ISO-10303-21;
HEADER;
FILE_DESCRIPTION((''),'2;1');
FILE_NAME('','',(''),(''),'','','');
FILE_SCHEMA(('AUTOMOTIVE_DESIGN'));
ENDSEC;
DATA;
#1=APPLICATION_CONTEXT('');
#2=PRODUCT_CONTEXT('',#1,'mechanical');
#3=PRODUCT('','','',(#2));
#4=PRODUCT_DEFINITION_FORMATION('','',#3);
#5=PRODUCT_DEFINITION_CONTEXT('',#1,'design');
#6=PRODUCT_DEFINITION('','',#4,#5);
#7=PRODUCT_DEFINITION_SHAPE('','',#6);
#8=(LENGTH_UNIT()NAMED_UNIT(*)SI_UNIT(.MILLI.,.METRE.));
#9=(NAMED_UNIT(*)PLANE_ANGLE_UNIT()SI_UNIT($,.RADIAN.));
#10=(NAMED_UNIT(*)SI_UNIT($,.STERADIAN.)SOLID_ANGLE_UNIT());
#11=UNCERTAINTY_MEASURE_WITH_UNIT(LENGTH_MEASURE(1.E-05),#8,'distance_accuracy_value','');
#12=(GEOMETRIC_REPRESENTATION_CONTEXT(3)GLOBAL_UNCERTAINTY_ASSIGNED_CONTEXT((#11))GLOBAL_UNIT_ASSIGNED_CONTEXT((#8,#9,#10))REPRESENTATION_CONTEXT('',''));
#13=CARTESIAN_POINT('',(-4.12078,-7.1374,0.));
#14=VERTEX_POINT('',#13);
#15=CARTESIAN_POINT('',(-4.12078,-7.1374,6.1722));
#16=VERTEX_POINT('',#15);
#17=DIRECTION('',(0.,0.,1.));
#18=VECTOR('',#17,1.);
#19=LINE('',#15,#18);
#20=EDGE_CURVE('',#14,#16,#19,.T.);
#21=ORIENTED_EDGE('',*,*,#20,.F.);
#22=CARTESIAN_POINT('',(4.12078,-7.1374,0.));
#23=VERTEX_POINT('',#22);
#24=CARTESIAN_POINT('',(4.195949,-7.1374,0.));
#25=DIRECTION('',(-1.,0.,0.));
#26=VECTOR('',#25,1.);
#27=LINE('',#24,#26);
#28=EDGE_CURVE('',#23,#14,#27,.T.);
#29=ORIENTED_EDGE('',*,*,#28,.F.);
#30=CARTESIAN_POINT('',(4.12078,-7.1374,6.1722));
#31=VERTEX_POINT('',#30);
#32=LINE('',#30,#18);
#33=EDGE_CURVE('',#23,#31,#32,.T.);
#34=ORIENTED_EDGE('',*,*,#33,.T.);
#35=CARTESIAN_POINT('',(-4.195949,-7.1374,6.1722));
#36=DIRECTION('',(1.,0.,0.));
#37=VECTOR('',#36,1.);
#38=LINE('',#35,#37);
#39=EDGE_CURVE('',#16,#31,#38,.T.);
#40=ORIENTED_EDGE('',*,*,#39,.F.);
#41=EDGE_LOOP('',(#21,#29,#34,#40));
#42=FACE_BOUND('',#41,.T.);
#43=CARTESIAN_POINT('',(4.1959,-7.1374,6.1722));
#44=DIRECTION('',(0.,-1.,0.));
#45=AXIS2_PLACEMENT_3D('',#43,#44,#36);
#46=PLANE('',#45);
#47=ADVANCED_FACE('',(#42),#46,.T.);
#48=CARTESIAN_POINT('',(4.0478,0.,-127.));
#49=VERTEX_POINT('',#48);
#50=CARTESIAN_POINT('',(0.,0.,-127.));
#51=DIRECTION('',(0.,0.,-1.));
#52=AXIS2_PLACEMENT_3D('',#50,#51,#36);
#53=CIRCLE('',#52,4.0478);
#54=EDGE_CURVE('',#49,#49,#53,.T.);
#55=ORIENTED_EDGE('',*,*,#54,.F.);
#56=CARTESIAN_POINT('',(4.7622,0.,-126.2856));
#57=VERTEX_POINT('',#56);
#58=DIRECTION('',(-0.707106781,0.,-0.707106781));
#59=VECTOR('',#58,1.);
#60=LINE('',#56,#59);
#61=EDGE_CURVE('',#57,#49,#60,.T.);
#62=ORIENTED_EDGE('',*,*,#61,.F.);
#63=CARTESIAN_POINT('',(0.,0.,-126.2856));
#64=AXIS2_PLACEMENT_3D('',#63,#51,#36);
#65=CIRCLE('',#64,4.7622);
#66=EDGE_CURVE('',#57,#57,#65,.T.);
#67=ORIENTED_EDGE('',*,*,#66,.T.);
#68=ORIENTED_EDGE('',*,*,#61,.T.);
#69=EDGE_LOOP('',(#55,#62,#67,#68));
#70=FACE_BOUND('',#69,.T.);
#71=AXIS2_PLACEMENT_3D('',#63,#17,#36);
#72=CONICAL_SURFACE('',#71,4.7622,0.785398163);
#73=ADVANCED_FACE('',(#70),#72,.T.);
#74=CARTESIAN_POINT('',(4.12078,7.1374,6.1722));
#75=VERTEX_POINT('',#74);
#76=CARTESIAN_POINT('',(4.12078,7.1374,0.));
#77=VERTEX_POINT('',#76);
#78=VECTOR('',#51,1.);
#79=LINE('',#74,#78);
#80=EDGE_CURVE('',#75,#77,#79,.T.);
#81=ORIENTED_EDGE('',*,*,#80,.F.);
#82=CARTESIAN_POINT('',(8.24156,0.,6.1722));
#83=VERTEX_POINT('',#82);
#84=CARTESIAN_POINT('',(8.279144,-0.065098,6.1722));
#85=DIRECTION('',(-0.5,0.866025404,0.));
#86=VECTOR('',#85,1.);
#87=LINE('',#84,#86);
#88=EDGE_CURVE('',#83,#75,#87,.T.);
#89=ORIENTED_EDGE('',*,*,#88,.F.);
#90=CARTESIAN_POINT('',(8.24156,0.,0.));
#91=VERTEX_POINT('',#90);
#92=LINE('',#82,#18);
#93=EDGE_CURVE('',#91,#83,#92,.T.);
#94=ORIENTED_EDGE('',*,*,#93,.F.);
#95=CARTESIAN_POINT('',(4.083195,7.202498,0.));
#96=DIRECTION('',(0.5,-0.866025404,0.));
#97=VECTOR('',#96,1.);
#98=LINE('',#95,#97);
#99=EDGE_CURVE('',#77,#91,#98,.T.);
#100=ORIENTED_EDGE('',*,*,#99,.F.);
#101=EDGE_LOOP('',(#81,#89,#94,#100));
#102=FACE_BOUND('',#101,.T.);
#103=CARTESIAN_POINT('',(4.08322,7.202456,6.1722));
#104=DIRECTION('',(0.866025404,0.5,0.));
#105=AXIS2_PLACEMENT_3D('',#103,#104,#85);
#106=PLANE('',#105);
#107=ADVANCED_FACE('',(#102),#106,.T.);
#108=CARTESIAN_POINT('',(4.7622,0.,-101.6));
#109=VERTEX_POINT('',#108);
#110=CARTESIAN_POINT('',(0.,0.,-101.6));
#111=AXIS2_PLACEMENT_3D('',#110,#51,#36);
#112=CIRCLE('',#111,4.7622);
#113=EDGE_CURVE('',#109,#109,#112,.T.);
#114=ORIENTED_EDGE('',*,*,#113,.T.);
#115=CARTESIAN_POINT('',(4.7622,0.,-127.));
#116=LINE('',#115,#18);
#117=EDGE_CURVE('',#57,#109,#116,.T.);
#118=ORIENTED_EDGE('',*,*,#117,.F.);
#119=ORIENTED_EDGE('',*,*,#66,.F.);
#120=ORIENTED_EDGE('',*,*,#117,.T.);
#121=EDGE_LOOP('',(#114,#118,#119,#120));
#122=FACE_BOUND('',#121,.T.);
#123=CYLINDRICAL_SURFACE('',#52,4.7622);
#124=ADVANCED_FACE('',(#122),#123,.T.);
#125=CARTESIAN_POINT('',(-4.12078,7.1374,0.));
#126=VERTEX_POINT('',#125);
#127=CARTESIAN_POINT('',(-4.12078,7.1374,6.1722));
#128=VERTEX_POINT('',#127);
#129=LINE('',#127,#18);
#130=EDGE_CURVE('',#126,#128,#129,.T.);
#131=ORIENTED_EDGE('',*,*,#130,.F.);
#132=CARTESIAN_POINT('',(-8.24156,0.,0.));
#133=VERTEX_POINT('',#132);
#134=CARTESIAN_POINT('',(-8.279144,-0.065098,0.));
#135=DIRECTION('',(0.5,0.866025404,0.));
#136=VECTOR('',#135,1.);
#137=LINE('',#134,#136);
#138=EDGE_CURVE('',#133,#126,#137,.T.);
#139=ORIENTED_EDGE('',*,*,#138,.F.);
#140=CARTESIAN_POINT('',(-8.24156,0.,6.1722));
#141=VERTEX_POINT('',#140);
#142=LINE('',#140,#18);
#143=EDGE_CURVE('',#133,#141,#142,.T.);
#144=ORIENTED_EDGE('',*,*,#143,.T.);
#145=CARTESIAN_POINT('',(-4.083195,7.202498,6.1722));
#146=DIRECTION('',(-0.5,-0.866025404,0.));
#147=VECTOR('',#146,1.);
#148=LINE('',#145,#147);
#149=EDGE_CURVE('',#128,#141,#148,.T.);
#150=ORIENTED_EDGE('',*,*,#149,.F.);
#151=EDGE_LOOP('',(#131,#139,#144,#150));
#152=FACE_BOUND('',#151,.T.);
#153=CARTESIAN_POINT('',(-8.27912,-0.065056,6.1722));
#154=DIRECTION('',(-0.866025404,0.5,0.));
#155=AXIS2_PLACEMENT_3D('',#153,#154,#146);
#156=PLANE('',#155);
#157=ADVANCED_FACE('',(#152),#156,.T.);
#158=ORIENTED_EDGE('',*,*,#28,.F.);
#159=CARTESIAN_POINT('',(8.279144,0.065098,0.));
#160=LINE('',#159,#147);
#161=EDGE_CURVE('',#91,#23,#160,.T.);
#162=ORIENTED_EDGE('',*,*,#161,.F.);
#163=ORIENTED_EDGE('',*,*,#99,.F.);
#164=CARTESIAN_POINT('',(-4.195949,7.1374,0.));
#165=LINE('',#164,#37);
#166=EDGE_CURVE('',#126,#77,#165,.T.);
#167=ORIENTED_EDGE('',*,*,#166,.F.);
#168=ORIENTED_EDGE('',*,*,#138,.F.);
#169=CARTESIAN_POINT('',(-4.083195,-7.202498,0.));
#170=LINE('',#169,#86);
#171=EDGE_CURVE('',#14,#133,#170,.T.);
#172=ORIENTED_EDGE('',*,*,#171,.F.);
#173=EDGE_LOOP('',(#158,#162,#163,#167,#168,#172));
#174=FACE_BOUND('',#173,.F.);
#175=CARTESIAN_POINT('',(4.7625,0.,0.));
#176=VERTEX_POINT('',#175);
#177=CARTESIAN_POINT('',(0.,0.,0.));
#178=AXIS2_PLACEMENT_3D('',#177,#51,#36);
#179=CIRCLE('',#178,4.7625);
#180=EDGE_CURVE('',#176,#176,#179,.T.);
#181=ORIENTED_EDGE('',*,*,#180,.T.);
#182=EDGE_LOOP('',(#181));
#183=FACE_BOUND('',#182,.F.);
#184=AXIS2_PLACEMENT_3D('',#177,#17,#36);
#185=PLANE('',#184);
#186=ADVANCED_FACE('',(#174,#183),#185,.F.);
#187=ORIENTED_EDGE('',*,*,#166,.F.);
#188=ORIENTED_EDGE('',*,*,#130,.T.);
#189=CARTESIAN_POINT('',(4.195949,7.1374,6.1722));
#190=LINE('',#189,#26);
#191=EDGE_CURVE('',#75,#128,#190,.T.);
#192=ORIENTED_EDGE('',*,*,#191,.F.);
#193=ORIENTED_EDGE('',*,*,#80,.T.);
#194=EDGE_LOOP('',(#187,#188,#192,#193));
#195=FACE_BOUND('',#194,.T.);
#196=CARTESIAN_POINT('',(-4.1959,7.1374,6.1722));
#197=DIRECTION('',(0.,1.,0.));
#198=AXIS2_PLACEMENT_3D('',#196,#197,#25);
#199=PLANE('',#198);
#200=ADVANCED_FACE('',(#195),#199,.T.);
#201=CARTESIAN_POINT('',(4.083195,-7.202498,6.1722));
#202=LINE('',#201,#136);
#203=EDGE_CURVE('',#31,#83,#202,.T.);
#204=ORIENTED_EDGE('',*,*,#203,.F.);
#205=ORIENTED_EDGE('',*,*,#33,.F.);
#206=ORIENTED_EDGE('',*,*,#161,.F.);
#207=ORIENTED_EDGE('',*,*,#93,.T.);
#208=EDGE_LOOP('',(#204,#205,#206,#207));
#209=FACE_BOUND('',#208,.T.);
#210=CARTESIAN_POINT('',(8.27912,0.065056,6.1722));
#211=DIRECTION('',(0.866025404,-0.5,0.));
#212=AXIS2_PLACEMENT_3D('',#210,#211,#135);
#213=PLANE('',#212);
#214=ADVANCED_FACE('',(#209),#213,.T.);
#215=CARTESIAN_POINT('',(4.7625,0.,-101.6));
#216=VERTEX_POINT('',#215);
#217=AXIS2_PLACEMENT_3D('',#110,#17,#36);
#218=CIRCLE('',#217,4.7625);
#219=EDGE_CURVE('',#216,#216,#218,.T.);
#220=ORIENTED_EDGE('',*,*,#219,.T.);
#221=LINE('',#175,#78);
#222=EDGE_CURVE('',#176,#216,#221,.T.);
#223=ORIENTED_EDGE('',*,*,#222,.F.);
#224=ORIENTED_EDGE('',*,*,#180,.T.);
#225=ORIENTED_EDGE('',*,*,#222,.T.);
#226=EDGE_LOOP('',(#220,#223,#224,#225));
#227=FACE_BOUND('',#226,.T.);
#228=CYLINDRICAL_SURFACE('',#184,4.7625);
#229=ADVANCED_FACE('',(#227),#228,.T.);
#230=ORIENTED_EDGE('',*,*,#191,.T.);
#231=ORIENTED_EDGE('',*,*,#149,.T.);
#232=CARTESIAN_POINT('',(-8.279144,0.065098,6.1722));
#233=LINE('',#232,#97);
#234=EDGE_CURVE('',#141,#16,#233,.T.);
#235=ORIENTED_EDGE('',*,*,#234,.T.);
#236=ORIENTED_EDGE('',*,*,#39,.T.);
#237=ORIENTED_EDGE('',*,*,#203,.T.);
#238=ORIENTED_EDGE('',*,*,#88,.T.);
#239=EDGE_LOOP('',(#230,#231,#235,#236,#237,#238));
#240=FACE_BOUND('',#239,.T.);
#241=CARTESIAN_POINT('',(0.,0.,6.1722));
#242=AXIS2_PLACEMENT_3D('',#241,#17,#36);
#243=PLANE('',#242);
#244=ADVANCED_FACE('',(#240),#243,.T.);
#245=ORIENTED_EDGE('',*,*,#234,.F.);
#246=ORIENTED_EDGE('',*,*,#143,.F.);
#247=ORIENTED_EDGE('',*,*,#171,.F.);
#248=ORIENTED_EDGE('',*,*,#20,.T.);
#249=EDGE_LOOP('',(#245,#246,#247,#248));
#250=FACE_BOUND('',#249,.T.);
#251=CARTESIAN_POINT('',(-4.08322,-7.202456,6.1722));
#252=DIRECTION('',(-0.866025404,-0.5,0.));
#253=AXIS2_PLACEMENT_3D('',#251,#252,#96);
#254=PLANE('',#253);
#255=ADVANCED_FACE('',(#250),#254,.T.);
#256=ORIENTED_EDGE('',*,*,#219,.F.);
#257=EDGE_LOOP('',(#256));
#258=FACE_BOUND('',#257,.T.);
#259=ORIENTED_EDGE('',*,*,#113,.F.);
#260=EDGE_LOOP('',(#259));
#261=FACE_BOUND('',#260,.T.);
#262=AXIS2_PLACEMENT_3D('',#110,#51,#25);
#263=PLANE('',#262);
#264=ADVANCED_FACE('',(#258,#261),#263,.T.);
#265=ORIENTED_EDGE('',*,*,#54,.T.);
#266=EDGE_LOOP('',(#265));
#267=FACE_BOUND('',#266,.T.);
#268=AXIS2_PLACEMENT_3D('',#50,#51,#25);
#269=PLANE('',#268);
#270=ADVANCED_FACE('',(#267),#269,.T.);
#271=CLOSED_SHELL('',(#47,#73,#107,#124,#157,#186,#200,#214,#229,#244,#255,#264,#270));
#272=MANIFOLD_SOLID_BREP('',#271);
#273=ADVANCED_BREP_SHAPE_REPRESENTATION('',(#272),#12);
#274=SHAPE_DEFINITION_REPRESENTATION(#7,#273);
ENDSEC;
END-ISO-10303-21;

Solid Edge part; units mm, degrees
sketch "Sketch1" plane through (0, 0, 0) normal (0, 0, 1) x (1, 0, 0)
  circle A0 centre (0, 0) radius 8.2794
  dimension "D1" = 16.5588
extrude "Protrusion1" add sketch "Sketch1" along normal blind 6.1722
sketch "Sketch2" plane through (0, 0, 0) normal (0, 0, -1) x (1, 0, 0)
  circle A0 centre (0, 0) radius 4.7625
extrude "Protrusion2" add sketch "Sketch2" along normal blind 127
sketch "Sketch3" plane through (0, 0, -127) normal (0, 0, -1) x (1, 0, 0)
  circle A0 centre (0, 0) radius 4.7622
extrude "Cutout1" cut sketch "Sketch3" against normal blind 25.4 flip side to cut
chamfer "Chamfer_1" distance 0.7144 angle 45 1 edges at (-4.7622, 0, -127)
sketch "Sketch4" plane through (0, 0, 6.1722) normal (0, 0, 1) x (1, 0, 0)
  line L0 (-4.1959, 7.1374) -> (4.1959, 7.1374)
  dimension "D1" = 14.2748
extrude "Cutout2" cut sketch "Sketch4" against normal up to next material side at (0, 7.1874, 6.1722)
pattern_circular "Pattern1" count 6 over 360 about axis through (0, 0, 6.1722) along (0, 0, 1) of "Cutout2"
properties part number "24100089"
